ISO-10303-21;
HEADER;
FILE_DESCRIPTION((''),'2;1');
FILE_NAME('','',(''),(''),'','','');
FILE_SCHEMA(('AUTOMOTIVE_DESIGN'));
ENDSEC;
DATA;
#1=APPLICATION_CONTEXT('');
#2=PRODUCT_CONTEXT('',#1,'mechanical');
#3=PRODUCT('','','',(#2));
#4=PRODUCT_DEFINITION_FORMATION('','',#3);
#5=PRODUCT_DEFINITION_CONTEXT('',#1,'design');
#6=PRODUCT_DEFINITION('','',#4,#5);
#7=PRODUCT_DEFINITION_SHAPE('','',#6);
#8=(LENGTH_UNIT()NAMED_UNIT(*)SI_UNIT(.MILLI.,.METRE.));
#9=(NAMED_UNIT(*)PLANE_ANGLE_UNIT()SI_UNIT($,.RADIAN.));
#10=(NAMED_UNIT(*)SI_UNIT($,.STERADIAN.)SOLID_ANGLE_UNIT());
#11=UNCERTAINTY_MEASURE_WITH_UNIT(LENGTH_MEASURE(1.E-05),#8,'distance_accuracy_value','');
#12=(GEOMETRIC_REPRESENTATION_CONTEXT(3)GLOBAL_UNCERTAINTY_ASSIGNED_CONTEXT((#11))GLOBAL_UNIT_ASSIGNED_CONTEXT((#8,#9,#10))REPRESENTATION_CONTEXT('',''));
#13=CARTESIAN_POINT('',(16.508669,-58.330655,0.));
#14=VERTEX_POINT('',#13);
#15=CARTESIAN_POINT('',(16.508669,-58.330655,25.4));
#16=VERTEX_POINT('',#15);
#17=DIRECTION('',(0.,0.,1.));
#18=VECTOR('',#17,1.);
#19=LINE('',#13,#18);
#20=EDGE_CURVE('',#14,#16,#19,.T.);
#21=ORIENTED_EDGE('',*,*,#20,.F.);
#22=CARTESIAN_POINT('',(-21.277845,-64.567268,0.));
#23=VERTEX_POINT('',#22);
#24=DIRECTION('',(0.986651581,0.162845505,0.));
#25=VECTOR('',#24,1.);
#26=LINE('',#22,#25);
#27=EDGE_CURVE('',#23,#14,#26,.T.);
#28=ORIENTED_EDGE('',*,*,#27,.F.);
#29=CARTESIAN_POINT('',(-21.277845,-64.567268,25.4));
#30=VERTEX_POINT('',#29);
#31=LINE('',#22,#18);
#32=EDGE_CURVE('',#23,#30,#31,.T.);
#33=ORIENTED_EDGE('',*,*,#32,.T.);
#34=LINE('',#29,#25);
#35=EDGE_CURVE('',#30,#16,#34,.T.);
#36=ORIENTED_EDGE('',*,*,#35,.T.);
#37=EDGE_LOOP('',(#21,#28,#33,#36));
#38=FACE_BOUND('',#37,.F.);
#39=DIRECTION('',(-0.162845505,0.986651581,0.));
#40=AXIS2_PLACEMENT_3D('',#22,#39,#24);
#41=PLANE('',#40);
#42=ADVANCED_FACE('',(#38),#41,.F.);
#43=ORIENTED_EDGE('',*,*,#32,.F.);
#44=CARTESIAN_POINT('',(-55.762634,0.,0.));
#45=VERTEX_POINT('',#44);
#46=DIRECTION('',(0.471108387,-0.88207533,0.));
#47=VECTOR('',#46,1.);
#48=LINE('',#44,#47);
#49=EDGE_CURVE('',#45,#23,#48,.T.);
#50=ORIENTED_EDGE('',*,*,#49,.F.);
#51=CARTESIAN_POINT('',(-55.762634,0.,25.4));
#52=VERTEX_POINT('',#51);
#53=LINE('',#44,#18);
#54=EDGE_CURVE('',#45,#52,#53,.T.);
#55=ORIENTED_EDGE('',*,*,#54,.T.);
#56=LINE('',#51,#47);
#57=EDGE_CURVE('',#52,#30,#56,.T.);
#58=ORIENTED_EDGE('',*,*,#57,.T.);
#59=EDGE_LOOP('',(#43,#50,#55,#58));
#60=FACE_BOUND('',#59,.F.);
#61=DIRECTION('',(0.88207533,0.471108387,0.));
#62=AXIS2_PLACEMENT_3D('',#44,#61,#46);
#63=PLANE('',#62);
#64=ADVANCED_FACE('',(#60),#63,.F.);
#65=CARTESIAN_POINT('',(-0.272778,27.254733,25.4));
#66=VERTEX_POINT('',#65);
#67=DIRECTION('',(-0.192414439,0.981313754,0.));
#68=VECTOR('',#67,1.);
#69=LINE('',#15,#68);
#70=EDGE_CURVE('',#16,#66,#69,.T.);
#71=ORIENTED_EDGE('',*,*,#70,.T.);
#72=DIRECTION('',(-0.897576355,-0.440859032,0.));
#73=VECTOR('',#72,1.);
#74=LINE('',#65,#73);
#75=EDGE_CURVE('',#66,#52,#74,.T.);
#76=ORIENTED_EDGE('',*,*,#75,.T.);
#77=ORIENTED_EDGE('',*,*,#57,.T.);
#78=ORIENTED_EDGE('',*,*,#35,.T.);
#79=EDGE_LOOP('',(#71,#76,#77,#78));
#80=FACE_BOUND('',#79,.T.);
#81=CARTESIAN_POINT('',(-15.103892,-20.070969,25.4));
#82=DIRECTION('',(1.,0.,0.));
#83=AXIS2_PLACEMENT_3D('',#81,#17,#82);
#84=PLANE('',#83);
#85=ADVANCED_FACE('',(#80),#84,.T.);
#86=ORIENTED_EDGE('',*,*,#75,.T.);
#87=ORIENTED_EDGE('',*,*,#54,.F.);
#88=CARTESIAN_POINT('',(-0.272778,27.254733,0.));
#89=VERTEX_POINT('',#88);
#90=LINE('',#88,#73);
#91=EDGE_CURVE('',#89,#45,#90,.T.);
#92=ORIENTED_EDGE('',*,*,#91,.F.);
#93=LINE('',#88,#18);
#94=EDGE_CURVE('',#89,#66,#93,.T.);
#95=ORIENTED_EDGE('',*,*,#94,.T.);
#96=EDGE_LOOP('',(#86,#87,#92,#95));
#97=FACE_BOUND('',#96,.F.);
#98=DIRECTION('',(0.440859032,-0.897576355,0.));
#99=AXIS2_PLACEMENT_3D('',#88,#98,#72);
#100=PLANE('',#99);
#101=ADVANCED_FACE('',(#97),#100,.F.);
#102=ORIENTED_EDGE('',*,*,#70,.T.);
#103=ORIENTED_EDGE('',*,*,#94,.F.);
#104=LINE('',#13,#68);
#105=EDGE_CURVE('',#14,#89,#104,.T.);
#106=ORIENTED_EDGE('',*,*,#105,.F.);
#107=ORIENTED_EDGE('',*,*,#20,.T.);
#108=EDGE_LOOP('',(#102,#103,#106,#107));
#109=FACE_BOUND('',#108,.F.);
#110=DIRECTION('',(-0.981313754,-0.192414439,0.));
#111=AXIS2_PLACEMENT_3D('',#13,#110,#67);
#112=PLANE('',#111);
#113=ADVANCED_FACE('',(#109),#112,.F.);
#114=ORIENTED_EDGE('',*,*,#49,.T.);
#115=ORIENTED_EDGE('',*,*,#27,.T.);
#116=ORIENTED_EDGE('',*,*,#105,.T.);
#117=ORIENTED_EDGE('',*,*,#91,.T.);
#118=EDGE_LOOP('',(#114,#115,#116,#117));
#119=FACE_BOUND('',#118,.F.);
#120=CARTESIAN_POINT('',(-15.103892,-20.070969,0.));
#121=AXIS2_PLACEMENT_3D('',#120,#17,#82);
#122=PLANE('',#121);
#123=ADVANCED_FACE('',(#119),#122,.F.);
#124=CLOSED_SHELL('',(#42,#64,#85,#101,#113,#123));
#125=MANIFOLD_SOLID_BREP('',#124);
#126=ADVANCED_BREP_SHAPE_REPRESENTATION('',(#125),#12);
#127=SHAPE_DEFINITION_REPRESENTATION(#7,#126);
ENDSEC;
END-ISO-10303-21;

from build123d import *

# Parameters (mm, degrees)
F3_DEPTH = 25.4


# Not quite as in the source:
# - the program builds the solid bodies; features that only make, move or delete a surface that nothing else refers to are left out


with BuildPart() as f3:
    # F2 (on Top) → F3 (new body)
    with BuildSketch(Plane.XY):
        Polygon((16.5086686611, -58.330655098), (-0.272778012, 27.2547331593), (-55.7626336813, 0), (-21.2778449059, -64.5672678947), align=None)
    extrude(amount=F3_DEPTH)


solid = f3.part
